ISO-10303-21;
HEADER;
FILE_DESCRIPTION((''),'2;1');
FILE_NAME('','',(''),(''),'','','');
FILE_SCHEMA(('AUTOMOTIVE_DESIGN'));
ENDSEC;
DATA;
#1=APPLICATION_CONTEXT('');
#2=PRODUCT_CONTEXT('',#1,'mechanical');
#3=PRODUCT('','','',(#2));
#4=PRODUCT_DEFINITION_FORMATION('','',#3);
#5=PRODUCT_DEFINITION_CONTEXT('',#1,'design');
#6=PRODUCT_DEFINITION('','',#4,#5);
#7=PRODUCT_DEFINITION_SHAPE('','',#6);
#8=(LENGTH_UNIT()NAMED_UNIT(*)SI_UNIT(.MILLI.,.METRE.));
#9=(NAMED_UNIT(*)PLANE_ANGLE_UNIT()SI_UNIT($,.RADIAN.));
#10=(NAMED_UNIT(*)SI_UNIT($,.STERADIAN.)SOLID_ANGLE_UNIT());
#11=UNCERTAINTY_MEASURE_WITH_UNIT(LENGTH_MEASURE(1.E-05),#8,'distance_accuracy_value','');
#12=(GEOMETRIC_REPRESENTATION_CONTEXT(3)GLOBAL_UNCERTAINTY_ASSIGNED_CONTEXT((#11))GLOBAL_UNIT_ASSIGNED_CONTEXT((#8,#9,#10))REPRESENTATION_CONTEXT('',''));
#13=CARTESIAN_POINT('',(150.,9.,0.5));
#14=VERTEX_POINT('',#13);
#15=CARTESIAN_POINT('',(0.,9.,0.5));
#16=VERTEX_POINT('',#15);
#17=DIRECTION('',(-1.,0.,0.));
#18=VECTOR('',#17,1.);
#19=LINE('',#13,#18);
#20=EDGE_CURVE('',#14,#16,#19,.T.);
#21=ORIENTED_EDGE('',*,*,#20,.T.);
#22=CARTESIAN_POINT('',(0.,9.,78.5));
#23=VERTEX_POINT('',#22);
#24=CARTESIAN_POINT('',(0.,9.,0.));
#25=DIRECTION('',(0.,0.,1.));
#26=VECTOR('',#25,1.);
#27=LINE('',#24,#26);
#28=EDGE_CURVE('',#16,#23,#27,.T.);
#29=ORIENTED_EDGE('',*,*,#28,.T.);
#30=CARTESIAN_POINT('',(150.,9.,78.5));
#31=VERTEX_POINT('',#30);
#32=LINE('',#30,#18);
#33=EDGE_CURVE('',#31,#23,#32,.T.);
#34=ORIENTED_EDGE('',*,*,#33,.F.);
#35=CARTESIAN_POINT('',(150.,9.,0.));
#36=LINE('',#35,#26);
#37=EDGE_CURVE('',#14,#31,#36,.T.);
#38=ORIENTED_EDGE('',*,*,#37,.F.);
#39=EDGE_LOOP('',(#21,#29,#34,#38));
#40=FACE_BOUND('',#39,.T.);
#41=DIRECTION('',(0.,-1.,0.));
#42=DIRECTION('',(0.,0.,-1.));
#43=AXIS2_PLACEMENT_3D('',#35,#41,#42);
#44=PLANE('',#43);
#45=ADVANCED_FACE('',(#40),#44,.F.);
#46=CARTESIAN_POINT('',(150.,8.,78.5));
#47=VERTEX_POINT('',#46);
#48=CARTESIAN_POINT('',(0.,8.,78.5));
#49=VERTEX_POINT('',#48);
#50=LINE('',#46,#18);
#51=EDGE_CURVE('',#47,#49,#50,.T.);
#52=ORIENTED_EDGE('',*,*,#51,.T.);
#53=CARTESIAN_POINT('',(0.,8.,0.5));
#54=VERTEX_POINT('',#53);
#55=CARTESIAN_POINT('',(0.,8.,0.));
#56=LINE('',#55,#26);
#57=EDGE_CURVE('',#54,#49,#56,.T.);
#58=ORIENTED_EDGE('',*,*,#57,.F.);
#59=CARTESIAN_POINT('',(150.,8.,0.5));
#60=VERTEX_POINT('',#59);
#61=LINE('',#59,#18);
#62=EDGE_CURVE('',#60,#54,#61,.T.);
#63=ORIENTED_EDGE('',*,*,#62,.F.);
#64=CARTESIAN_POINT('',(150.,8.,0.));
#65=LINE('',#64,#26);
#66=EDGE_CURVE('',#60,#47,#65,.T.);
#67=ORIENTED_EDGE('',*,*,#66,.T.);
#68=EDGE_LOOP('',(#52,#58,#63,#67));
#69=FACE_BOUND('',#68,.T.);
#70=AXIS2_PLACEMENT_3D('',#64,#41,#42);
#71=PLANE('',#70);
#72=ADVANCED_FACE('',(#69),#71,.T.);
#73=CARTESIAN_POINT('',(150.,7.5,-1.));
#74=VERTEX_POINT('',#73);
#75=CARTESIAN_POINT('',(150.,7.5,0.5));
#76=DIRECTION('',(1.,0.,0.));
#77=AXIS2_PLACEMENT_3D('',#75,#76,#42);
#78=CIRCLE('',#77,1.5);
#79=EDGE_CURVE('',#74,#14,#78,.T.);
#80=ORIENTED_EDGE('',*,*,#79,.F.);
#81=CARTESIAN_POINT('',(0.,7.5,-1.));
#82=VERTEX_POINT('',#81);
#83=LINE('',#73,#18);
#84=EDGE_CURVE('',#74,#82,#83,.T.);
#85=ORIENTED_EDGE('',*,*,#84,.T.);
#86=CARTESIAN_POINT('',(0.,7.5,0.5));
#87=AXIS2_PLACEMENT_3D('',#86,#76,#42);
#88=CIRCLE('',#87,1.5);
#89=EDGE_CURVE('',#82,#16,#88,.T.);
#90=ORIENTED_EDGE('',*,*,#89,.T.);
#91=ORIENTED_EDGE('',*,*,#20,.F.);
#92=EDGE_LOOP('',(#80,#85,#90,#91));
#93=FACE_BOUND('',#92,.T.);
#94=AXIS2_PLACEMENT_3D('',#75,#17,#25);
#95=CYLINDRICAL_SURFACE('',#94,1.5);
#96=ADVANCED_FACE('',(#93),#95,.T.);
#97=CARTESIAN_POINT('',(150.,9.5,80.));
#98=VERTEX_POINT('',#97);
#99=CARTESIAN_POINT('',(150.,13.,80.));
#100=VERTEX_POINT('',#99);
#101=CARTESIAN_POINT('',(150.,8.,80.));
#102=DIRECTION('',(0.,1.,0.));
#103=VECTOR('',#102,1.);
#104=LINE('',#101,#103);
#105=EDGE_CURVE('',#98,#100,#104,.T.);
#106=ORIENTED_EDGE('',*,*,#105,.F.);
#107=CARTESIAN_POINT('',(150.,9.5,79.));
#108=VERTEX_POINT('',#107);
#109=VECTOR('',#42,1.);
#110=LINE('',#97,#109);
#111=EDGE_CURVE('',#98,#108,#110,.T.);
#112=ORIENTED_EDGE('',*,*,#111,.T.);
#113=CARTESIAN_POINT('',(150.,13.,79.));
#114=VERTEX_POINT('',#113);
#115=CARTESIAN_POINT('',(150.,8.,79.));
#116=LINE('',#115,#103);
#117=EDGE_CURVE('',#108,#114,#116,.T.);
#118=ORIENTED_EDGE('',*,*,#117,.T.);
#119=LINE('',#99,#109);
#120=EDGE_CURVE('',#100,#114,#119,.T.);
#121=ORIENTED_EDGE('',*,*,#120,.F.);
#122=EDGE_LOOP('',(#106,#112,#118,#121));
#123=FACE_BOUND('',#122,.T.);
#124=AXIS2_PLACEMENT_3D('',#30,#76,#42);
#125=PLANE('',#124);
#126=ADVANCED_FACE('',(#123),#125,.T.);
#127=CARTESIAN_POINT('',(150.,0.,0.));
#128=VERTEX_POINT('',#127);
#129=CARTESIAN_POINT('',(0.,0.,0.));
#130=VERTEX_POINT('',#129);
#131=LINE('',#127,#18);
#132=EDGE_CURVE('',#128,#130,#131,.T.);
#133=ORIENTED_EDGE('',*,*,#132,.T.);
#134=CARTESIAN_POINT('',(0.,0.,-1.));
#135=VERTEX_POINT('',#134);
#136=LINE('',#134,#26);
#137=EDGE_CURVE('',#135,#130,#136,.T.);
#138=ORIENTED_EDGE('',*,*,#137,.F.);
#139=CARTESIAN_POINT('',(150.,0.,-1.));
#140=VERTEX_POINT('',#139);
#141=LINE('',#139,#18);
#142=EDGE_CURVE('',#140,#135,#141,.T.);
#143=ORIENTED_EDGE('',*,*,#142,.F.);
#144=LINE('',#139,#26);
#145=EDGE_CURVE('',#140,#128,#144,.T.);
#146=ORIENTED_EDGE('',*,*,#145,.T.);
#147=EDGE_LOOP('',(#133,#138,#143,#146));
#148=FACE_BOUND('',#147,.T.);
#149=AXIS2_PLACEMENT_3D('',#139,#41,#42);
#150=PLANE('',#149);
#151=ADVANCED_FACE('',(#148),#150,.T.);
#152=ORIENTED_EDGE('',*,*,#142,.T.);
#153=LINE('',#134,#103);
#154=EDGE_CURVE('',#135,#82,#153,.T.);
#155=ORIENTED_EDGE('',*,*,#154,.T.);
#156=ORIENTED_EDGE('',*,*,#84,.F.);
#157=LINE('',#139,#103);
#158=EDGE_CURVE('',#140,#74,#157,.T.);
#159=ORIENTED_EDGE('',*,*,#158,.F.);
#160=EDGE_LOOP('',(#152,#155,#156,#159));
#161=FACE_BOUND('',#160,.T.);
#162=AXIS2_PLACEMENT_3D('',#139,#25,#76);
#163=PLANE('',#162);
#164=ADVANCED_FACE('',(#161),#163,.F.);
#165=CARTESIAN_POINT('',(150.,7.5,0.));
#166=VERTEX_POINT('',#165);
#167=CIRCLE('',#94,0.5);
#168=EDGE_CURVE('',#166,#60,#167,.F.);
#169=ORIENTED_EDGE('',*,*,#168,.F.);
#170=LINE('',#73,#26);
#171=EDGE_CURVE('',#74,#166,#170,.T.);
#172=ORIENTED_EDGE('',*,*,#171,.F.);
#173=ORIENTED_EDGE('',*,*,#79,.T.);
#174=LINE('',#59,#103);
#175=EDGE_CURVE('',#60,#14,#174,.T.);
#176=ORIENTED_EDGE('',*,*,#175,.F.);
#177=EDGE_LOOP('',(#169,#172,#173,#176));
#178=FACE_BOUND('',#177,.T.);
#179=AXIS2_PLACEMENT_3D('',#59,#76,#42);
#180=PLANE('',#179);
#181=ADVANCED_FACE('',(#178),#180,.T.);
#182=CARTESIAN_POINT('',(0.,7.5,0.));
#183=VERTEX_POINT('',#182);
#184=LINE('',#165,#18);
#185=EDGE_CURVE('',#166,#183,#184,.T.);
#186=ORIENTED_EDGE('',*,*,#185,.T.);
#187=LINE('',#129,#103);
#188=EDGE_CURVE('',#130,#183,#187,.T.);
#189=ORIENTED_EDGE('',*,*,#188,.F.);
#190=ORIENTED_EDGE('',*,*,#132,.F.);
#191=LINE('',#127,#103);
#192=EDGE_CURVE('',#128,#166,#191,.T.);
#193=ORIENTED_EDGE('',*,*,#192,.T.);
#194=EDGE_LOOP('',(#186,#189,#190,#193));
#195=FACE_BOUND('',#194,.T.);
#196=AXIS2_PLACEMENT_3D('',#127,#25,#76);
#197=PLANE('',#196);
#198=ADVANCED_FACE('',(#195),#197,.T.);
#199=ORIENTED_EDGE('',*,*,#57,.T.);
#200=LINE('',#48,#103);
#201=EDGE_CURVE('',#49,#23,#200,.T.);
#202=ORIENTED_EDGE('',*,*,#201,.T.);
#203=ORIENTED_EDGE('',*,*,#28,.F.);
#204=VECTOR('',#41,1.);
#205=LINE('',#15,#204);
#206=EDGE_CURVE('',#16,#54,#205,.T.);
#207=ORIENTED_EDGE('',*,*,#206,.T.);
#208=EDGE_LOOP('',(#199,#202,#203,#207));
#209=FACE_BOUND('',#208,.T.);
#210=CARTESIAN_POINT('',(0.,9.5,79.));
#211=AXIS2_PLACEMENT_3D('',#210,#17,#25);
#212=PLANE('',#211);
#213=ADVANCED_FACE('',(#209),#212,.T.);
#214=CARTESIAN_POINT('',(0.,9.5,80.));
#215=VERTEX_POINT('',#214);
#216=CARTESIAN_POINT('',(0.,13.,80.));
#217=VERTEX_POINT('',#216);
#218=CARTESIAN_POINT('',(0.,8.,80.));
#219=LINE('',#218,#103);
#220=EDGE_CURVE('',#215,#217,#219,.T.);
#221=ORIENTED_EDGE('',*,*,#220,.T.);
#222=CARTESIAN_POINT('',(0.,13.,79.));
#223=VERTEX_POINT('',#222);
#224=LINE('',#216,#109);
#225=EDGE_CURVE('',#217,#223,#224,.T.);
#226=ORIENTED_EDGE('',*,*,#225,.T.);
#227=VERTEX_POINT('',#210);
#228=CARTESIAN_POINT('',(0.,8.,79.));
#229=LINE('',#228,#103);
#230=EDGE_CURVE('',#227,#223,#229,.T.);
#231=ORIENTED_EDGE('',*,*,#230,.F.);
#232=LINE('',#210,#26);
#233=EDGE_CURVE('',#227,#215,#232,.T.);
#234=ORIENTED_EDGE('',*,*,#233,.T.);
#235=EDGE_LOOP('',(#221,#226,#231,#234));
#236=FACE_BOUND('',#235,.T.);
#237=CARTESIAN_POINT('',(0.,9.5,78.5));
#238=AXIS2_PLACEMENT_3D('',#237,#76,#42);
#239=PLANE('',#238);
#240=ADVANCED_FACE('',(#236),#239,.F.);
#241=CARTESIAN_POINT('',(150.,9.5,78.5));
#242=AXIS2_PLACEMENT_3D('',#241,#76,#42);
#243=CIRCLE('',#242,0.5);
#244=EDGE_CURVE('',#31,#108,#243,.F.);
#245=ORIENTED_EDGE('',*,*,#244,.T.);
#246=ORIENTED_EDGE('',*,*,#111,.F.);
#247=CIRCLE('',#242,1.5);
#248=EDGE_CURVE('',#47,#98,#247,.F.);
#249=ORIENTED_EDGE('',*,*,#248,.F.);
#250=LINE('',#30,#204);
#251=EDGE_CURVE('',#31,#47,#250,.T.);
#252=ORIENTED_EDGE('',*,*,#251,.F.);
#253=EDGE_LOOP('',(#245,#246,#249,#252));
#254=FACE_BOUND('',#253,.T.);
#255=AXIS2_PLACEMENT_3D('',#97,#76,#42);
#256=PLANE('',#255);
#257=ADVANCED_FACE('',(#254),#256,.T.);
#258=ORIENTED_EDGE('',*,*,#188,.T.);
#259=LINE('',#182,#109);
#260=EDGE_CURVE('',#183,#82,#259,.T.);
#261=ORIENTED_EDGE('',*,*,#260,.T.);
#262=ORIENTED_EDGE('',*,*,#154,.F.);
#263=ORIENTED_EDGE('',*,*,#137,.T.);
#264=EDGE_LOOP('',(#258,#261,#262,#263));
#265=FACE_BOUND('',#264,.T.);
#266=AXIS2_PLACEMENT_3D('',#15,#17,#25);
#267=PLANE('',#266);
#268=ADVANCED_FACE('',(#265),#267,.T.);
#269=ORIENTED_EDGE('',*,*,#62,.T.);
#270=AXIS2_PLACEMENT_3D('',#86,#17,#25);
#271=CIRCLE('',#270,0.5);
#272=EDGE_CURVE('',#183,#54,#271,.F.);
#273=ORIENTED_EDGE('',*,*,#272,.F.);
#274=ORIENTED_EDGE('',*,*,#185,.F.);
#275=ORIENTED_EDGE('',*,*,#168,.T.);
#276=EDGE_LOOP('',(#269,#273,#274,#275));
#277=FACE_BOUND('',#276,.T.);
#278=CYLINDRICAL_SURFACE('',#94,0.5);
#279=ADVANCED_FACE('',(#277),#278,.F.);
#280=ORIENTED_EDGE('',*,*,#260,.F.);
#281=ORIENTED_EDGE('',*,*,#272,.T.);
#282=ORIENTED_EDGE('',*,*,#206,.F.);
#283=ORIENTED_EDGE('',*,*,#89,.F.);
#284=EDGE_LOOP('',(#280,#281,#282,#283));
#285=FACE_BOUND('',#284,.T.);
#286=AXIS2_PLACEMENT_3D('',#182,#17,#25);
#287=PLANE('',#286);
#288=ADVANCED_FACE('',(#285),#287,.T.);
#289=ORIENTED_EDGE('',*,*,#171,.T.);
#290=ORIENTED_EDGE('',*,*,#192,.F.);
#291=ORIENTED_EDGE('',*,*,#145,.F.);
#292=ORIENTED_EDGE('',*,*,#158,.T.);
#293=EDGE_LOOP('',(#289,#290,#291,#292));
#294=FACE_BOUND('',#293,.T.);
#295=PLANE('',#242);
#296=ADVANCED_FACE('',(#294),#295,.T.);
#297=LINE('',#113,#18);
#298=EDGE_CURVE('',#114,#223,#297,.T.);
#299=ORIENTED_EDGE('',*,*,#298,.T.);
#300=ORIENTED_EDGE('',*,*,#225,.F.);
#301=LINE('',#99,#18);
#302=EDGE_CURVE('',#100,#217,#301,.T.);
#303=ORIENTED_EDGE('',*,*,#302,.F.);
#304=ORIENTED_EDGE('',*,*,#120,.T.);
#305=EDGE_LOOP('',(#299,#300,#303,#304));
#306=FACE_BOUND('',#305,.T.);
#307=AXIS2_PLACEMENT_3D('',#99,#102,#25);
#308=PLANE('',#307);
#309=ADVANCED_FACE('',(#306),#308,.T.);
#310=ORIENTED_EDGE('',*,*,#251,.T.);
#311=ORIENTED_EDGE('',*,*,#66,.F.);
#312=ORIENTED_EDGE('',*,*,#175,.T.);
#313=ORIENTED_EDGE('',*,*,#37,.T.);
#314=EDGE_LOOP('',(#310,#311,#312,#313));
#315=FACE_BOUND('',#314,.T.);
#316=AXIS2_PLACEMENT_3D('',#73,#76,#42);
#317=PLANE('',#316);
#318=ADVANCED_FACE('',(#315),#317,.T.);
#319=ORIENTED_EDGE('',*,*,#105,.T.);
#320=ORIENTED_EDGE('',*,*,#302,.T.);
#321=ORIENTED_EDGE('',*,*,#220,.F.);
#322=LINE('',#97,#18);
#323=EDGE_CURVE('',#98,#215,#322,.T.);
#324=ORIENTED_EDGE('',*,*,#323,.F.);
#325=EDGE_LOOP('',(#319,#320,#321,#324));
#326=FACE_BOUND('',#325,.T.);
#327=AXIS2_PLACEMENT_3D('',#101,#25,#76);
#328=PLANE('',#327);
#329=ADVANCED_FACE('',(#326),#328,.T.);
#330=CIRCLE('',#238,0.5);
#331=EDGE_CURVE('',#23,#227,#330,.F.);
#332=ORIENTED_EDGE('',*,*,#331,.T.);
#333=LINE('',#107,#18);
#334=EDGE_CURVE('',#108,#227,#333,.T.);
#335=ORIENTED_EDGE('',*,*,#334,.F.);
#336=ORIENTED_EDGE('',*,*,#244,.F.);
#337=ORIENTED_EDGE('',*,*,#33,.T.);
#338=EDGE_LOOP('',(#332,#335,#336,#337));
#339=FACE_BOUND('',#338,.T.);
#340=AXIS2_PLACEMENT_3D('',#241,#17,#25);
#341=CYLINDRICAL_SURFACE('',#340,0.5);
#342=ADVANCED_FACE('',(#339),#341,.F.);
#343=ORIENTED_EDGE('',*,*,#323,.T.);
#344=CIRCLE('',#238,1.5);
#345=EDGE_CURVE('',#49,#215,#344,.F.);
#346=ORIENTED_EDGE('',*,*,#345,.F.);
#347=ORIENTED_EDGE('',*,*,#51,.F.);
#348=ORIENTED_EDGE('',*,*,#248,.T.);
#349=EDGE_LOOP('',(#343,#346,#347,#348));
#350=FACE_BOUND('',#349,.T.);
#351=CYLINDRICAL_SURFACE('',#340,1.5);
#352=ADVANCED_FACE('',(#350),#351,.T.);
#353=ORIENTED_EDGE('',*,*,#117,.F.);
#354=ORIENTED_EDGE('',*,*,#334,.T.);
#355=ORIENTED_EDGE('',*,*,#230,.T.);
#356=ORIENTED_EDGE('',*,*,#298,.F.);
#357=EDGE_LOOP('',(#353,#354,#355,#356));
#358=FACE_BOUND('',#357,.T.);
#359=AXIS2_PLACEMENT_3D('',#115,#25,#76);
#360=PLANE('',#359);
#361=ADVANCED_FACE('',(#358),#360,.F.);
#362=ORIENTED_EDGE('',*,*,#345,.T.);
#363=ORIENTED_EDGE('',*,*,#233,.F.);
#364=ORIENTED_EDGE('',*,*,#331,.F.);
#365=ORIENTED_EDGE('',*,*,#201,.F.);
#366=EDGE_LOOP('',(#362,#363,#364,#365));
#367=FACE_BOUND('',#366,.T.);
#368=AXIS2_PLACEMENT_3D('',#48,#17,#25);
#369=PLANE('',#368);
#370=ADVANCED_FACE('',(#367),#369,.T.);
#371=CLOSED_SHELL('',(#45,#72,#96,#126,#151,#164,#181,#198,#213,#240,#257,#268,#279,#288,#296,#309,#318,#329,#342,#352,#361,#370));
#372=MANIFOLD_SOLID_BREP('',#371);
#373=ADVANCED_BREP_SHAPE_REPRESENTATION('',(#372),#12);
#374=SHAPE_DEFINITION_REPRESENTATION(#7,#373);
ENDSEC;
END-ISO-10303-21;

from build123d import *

# Parameters (mm, degrees)
BASE_FLANGE1_DEPTH = 150


# Sheet-metal steps are written as plain solids
with BuildPart() as part:
    # Sketch1 → Base-Flange1 (new body)
    with BuildSketch(Plane(origin=(0, 0, 0), x_dir=(0, 0, -1), z_dir=(1, 0, 0))):
        with BuildLine():
            Line((0, 0), (0, 7.5))
            ThreePointArc((0, 7.5), (-0.146446609, 7.853553391), (-0.5, 8))
            Line((-0.5, 8), (-78.5, 8))
            ThreePointArc((-78.5, 8), (-79.560660172, 8.439339828), (-80, 9.5))
            Line((-80, 9.5), (-80, 13))
            Line((-80, 13), (-79, 13))
            Line((-79, 13), (-79, 9.5))
            ThreePointArc((-79, 9.5), (-78.853553391, 9.146446609), (-78.5, 9))
            Line((-78.5, 9), (-0.5, 9))
            ThreePointArc((-0.5, 9), (0.560660172, 8.560660172), (1, 7.5))
            Line((1, 7.5), (1, 0))
            Line((1, 0), (0, 0))
        make_face()
    extrude(amount=BASE_FLANGE1_DEPTH)


solid = part.part
